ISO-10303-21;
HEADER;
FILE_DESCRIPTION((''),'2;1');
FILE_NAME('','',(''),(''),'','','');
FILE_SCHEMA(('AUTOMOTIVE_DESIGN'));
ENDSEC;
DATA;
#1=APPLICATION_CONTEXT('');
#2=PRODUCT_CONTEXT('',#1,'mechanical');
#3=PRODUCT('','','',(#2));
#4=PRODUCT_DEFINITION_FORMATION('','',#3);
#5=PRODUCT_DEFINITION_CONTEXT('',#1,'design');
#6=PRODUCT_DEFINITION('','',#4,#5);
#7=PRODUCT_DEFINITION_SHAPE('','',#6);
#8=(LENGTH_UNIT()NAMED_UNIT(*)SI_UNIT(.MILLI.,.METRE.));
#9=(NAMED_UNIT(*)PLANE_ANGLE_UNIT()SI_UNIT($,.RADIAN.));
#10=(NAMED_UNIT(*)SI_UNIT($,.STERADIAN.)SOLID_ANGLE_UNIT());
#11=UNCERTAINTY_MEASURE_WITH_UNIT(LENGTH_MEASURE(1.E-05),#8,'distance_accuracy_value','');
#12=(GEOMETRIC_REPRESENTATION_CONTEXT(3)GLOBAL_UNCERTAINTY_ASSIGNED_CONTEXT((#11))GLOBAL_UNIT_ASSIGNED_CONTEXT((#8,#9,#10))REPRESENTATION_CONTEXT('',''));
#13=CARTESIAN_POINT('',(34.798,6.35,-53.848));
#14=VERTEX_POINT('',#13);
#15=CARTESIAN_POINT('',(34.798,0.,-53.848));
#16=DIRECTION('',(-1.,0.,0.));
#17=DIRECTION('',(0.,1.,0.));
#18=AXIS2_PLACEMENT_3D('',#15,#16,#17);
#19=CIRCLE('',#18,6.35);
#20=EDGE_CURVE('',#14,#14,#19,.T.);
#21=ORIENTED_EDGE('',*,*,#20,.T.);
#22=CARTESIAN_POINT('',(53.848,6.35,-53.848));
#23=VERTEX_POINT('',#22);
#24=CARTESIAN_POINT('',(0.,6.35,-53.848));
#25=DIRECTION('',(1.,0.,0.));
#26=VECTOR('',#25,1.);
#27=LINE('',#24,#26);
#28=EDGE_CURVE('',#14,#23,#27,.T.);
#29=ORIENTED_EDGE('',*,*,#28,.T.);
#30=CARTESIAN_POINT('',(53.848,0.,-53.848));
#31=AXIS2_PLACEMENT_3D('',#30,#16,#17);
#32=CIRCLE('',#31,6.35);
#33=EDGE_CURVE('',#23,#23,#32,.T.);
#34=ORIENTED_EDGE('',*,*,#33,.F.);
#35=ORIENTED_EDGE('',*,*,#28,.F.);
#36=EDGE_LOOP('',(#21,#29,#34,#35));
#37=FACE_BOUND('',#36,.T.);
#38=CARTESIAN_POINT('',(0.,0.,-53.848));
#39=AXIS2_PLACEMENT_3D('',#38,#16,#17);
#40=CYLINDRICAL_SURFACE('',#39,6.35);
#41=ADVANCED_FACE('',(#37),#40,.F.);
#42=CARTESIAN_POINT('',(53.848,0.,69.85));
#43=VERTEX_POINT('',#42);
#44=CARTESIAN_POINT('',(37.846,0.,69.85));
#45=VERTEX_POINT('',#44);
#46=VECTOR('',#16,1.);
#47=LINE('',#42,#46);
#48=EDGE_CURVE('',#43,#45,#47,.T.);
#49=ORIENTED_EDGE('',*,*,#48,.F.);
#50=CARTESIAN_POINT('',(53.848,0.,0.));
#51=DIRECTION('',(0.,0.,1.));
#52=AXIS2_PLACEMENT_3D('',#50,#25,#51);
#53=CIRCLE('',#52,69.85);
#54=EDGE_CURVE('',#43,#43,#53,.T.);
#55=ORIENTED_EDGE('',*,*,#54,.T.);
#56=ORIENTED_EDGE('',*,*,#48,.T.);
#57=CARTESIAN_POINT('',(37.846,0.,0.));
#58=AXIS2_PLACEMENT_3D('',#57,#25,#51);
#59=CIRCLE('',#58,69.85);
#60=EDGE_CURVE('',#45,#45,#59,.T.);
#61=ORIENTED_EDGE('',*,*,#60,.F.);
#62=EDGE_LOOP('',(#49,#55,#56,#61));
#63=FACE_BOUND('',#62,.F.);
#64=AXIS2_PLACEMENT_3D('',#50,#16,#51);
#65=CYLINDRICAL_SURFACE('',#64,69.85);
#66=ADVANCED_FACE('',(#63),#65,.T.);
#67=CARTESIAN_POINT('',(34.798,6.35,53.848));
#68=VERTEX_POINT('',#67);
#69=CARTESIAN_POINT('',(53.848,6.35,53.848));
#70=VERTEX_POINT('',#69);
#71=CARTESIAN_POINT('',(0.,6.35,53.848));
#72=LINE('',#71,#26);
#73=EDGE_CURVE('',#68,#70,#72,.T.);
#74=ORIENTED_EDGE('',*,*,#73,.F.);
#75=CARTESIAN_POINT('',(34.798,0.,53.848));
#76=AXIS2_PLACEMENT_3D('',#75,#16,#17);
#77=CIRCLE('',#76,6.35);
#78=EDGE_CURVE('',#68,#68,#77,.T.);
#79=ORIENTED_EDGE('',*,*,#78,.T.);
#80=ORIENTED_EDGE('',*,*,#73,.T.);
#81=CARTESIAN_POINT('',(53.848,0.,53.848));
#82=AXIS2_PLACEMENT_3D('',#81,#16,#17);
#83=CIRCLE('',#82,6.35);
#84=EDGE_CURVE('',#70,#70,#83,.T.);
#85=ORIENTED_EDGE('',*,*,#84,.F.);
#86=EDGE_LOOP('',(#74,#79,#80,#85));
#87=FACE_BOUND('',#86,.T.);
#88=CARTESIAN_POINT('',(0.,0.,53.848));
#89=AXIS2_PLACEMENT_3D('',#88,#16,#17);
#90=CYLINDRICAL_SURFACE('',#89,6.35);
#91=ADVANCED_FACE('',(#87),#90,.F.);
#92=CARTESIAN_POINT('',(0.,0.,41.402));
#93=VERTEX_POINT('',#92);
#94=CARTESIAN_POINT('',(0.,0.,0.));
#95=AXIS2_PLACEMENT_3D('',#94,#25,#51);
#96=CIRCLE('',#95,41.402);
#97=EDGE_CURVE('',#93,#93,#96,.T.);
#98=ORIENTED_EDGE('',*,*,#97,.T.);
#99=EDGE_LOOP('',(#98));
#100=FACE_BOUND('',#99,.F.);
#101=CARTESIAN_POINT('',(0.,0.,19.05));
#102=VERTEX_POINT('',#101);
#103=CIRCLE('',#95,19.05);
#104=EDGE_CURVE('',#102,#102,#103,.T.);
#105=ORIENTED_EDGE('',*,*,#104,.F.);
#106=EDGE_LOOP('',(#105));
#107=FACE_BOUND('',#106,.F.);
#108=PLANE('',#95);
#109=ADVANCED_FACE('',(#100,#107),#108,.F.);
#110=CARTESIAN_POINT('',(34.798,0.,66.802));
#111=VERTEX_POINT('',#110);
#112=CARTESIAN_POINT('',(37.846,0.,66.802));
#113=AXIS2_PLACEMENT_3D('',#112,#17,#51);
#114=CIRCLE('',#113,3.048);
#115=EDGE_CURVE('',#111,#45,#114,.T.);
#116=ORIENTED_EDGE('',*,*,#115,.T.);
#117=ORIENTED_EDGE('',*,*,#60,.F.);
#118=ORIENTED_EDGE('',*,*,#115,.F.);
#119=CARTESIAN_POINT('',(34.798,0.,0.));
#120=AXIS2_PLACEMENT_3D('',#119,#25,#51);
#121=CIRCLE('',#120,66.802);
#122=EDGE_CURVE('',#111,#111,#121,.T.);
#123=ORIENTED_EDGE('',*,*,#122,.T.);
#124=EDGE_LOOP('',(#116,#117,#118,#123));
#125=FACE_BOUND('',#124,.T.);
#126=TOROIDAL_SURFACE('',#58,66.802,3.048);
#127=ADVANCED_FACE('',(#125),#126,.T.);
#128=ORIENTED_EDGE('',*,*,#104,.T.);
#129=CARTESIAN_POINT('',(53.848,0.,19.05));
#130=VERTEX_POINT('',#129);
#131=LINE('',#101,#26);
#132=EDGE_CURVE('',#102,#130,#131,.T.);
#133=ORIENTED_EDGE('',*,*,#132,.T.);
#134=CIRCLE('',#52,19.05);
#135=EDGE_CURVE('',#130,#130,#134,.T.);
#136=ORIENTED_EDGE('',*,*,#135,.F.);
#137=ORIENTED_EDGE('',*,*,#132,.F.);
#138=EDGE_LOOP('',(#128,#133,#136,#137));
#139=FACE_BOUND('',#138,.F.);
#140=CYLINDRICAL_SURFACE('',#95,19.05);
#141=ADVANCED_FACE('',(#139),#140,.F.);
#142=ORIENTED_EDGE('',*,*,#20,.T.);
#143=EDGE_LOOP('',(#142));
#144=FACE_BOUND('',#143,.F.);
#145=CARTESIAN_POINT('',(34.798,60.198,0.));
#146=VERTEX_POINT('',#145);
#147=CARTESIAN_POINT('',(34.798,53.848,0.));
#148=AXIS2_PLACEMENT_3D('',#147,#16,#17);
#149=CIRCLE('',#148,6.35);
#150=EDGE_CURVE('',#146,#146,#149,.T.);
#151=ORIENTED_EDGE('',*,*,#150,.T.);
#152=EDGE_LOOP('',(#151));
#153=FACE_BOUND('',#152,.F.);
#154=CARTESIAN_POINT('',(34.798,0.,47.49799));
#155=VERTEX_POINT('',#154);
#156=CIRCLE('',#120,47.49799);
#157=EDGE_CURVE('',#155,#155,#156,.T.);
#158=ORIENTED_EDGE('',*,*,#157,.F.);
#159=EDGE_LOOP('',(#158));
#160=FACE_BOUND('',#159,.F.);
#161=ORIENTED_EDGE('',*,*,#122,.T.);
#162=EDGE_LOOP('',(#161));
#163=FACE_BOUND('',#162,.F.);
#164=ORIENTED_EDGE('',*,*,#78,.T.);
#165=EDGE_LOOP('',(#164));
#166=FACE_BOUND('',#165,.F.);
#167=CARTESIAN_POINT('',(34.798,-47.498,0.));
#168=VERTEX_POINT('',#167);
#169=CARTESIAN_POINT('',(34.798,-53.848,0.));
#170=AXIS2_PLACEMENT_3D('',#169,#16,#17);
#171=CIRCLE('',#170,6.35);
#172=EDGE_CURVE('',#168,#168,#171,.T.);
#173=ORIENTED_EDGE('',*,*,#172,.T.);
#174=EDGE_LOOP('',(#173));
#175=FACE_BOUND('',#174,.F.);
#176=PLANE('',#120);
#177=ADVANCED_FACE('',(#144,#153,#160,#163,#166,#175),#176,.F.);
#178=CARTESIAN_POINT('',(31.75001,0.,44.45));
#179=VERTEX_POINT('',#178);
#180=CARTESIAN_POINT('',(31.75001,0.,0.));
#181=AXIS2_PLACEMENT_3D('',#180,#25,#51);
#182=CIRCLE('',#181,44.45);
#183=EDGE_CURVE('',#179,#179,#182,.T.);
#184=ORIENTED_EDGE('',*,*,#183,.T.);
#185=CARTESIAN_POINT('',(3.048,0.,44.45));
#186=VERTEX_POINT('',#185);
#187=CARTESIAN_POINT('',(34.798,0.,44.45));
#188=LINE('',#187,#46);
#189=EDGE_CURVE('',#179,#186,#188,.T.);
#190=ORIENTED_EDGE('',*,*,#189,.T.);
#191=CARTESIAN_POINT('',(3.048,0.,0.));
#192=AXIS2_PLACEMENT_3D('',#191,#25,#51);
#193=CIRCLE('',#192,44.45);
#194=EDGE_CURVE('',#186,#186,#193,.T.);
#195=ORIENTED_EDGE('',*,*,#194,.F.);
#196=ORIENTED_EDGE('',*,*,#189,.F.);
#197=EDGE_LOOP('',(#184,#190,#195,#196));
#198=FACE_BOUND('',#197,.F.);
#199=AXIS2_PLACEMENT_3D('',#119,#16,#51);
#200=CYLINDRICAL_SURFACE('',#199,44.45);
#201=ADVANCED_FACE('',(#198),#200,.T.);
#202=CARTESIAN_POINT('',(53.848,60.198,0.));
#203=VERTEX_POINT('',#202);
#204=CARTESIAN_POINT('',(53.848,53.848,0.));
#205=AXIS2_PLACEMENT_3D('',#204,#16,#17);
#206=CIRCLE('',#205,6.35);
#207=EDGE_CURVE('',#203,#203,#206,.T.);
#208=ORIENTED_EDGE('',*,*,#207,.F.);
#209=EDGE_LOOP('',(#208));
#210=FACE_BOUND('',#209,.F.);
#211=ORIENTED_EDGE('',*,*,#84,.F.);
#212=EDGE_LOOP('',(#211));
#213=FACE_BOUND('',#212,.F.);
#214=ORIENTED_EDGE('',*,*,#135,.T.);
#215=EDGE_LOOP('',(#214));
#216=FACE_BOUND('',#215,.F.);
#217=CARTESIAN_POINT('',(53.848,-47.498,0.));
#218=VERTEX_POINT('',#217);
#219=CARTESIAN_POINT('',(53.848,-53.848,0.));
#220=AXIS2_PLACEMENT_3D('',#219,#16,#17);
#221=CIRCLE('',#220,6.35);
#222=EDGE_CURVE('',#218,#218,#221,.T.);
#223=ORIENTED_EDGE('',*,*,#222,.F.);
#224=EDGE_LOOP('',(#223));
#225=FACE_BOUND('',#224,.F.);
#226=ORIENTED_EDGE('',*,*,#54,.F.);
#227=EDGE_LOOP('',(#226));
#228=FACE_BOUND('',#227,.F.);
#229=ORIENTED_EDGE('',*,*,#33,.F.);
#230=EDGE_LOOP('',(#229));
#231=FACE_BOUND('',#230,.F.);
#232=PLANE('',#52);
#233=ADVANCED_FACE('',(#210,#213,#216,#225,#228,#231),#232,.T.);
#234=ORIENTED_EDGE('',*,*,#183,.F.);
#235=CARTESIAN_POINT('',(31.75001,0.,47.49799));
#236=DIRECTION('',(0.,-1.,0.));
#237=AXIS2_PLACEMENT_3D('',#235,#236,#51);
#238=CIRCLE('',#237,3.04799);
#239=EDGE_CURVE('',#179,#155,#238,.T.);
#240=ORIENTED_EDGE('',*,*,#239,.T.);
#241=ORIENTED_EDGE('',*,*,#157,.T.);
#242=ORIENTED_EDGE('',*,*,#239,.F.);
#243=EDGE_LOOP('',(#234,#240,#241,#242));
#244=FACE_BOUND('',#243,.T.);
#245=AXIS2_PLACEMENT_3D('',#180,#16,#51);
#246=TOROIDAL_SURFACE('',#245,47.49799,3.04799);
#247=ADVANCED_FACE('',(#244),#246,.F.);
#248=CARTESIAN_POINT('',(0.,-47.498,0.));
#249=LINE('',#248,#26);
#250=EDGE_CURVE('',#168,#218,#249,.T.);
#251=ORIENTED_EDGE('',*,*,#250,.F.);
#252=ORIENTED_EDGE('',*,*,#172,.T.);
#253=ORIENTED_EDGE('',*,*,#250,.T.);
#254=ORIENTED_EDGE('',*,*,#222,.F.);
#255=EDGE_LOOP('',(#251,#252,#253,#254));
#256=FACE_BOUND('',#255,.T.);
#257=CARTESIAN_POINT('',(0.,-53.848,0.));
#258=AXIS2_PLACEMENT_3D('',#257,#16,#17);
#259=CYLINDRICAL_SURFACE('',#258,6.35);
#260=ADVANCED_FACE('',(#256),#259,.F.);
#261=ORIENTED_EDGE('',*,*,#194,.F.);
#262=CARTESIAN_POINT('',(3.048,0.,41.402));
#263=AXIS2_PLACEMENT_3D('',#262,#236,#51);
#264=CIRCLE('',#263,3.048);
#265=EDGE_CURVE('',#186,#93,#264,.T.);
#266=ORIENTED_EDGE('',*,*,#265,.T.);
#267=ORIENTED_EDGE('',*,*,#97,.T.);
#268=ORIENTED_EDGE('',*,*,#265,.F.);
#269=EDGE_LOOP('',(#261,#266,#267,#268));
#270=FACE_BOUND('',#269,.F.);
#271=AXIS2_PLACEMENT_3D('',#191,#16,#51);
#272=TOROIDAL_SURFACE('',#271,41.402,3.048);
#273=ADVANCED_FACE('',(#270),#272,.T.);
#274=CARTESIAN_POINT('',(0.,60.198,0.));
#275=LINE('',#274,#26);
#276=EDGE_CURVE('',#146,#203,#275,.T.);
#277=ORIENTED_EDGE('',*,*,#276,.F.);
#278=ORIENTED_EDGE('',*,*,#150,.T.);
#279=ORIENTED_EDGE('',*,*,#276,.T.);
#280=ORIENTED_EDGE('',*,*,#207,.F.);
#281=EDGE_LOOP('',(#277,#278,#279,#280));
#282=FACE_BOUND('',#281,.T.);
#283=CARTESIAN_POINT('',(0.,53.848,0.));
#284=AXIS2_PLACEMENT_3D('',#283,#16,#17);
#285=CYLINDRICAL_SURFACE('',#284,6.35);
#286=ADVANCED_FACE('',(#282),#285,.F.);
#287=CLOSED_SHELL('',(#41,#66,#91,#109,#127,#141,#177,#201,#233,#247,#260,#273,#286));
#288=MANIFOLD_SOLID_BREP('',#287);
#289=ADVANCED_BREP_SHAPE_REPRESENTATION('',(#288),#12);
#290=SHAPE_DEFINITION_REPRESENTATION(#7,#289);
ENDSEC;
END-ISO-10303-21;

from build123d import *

# Parameters (mm, degrees)
F2_R     = 6.35
F3_DEPTH = 53.849
F4_R     = 3.04799
F5_R     = 3.048


# Not quite as in the source:
# - a fillet or chamfer is up to 0.001 mm smaller than in the source, because OpenCascade refuses the exact size


with BuildPart() as f1:
    # F0 (on Front) → F1 (revolve)
    with BuildSketch(Plane.XZ):
        Polygon((0, 44.45), (0, 19.05), (53.848, 19.05), (53.848, 69.85), (34.798, 69.85), (34.798, 44.45), align=None)
    revolve(axis=Axis((45.7144924702, 0, 0), (1, 0, 0)))

    # F2 (on Right) → F3 (cut, through all)
    with BuildSketch(Plane.YZ):
        with Locations((0, 53.848)):
            Circle(F2_R)
        with Locations((53.848, 0)):
            Circle(F2_R)
        with Locations((-53.848, 0)):
            Circle(F2_R)
        with Locations((0, -53.848)):
            Circle(F2_R)
    extrude(amount=F3_DEPTH, mode=Mode.SUBTRACT)

    # F4 (radius 3.048 in the source; OpenCascade refuses exactly that, so slightly less here)
    f4_edges = [f1.edges().sort_by_distance(p)[0] for p in [
        (34.798, 0, -44.45),
    ]]
    fillet(f4_edges, radius=F4_R)

    # F5
    f5_edges = [f1.edges().sort_by_distance(p)[0] for p in [
        (0, 0, -44.45),
        (34.798, 0, -69.85),
    ]]
    fillet(f5_edges, radius=F5_R)


solid = f1.part
